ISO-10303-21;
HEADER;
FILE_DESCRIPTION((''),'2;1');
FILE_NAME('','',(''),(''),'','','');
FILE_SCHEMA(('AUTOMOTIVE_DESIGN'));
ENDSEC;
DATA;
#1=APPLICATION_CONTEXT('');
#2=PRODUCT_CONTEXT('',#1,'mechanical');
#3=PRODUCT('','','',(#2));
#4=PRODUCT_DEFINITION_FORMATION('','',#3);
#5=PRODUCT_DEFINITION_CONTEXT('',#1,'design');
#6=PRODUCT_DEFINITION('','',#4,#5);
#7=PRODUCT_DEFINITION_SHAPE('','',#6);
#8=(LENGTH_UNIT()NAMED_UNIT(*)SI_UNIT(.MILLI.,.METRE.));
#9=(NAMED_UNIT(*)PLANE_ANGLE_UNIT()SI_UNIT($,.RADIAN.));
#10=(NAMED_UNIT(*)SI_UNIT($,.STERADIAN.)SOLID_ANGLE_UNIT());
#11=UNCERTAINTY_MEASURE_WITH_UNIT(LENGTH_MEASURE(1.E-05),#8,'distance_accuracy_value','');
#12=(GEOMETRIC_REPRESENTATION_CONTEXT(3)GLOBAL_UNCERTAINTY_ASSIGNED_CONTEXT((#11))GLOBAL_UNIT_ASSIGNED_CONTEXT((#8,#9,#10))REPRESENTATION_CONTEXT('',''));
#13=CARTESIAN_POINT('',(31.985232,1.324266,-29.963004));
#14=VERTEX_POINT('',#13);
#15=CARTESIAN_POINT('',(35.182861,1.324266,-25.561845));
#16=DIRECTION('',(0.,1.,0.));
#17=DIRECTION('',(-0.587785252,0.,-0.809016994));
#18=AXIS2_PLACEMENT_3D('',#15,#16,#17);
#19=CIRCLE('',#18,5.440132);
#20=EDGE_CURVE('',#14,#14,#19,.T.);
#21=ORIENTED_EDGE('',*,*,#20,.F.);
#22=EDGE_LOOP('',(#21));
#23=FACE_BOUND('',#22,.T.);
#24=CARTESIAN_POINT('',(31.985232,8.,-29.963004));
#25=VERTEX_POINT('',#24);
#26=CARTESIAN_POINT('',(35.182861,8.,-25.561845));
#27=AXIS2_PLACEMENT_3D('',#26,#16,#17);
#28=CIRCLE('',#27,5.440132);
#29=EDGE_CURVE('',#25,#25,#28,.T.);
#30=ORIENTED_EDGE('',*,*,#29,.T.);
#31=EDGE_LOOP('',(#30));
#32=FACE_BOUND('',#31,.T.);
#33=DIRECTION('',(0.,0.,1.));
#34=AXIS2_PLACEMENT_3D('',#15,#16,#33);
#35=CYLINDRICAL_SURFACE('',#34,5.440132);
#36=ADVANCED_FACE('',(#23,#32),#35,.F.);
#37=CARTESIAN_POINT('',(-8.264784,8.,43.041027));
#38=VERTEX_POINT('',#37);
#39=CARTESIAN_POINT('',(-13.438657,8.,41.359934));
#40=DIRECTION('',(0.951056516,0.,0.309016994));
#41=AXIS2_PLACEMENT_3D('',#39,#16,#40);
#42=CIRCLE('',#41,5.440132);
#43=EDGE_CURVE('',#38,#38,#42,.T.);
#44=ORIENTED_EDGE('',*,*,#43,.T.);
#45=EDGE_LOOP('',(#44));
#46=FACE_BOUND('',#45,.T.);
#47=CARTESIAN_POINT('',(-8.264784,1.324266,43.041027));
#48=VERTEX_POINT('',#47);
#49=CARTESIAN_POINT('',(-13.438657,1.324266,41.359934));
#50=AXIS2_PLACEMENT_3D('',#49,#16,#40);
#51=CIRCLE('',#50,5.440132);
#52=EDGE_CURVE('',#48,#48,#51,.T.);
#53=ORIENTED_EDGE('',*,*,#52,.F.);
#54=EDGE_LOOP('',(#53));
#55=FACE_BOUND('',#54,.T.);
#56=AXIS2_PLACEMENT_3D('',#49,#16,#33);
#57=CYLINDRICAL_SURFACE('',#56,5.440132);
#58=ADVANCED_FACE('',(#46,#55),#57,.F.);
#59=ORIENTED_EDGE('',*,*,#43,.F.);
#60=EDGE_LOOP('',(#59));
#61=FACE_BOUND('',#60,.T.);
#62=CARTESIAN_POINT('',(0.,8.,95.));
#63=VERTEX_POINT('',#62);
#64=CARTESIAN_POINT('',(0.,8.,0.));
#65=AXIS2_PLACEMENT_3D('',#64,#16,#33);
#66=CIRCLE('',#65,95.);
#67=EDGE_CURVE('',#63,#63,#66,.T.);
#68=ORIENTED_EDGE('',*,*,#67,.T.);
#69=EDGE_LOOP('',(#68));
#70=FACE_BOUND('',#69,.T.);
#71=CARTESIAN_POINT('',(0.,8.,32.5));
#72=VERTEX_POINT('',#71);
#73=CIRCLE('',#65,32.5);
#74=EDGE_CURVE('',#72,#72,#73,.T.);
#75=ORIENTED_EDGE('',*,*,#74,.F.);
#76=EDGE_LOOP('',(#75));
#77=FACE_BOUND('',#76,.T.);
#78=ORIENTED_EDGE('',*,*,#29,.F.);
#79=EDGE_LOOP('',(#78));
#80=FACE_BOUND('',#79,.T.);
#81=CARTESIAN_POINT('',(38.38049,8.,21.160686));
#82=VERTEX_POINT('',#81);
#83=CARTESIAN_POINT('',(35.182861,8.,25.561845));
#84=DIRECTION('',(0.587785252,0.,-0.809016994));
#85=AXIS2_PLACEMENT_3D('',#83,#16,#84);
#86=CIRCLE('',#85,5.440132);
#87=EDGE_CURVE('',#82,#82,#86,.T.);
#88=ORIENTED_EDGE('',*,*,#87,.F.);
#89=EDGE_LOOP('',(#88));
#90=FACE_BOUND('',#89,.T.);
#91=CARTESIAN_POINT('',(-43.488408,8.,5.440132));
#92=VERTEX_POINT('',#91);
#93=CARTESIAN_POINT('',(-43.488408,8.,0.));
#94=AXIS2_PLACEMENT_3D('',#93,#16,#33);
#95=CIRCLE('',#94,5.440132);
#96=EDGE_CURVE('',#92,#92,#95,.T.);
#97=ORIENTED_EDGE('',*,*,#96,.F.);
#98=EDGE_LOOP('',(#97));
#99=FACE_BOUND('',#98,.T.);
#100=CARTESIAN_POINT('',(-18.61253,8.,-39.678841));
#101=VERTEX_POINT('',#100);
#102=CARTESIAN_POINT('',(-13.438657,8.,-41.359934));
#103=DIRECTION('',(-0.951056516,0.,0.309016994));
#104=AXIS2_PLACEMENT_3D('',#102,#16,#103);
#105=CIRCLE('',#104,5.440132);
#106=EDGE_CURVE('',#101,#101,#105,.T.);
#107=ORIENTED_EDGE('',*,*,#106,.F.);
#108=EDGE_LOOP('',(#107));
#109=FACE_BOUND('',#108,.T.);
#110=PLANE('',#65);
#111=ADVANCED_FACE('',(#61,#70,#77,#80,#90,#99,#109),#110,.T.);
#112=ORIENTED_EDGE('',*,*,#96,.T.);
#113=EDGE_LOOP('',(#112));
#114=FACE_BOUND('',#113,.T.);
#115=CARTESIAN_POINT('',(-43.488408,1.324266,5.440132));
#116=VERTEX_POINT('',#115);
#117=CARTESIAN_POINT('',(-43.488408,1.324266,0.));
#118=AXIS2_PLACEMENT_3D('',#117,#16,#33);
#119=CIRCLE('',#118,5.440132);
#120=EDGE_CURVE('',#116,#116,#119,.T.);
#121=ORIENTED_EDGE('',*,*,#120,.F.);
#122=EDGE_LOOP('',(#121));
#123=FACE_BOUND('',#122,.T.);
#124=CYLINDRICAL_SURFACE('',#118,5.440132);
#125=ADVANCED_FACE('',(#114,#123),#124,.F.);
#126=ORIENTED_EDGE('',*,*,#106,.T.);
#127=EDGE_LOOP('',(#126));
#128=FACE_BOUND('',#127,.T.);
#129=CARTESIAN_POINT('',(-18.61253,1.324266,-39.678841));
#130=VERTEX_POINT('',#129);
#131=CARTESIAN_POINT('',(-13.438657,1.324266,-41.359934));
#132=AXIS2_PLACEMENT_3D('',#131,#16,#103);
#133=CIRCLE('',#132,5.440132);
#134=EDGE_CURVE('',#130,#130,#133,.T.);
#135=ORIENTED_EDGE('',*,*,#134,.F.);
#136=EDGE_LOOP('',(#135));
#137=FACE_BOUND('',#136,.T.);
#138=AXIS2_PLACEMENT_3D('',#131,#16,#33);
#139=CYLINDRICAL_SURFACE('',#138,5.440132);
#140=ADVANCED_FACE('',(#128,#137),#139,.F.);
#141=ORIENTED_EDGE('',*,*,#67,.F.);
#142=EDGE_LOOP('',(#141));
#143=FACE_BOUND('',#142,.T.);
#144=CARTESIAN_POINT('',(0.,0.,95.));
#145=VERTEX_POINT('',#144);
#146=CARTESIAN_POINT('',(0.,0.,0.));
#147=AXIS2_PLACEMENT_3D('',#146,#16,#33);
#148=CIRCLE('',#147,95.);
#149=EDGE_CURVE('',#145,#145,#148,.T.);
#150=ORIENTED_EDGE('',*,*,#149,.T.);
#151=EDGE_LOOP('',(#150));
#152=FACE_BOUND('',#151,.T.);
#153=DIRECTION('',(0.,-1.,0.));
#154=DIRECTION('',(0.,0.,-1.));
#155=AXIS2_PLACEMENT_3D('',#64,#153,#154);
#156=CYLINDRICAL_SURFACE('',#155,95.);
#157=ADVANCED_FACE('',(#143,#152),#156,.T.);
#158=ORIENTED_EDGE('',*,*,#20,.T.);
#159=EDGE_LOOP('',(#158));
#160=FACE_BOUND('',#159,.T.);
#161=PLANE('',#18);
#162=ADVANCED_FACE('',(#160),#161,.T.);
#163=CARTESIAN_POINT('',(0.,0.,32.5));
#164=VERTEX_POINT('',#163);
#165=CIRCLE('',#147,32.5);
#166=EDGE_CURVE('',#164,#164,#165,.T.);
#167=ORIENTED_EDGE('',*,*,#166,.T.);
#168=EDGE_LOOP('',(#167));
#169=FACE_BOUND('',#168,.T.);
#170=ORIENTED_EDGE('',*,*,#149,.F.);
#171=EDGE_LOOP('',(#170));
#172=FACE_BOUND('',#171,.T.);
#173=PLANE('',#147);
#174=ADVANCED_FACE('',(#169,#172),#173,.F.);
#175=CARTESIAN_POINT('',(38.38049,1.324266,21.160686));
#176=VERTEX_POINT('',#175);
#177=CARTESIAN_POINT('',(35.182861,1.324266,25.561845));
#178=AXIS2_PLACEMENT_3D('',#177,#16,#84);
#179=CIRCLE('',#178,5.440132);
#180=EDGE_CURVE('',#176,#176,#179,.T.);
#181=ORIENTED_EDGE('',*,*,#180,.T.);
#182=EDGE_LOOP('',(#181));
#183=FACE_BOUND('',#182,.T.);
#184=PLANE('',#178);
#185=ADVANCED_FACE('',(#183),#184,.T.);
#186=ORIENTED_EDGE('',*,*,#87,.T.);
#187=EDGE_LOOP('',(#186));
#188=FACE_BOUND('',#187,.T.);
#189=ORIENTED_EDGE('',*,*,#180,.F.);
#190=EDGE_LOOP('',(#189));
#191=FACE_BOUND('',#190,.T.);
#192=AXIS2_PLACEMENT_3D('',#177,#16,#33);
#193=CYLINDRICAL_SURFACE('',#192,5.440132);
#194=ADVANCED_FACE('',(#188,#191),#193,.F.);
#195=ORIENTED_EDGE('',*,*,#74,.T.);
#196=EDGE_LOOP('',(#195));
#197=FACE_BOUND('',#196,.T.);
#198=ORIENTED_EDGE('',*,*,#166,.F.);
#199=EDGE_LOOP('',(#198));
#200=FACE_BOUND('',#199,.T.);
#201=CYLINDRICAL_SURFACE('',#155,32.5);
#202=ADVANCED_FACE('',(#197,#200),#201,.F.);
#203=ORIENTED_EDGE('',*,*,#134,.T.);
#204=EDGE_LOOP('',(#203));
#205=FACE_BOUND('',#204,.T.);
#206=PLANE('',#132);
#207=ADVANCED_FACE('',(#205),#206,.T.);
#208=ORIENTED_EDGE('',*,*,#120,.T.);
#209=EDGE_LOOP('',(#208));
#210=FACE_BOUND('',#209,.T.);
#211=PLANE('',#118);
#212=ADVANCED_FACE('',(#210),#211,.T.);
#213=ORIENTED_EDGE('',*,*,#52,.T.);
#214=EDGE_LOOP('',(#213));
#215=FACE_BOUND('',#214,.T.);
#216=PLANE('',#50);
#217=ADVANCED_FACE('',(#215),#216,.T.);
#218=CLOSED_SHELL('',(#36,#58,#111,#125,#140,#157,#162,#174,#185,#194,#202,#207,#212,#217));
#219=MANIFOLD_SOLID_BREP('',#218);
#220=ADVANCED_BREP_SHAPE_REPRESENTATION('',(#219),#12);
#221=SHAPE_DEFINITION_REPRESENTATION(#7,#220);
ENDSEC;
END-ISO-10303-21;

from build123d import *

# Parameters (mm, degrees)
SKETCH1_R           = 95
BOSS_EXTRUDE1_DEPTH = 8
SKETCH2_R           = 32.5
CUT_EXTRUDE1_DEPTH  = 135.588261004
SKETCH3_R           = 5.440131652
CUT_EXTRUDE2_DEPTH  = 6.675734076
CIRPATTERN1_COUNT   = 5


with BuildPart() as part:
    # Sketch1 → Boss-Extrude1 (new body)
    with BuildSketch(Plane(origin=(0, 0, 0), x_dir=(1, 0, 0), z_dir=(0, 1, 0))):
        Circle(SKETCH1_R)
    extrude(amount=BOSS_EXTRUDE1_DEPTH)

    # Sketch2 → Cut-Extrude1 (cut, through all)
    with BuildSketch(Plane(origin=(0, 0, 0), x_dir=(1, 0, 0), z_dir=(0, 1, 0))):
        Circle(SKETCH2_R)
    extrude(amount=CUT_EXTRUDE1_DEPTH, mode=Mode.SUBTRACT)

    # Sketch3 → Cut-Extrude2 (cut)
    with BuildSketch(Plane(origin=(0, 8, 0), x_dir=(1, 0, 0), z_dir=(0, 1, 0))):
        with Locations((-43.488407833, 0)):
            Circle(SKETCH3_R)
    cut_extrude2 = extrude(amount=-CUT_EXTRUDE2_DEPTH, mode=Mode.SUBTRACT)

    # CirPattern1: Cut-Extrude2 ×5 about axis
    cirpattern1_axis = Axis((0, 0, 0), (0, 1, 0))
    for i in range(1, CIRPATTERN1_COUNT):
        add(cut_extrude2.rotate(cirpattern1_axis, i * 360 / CIRPATTERN1_COUNT), mode=Mode.SUBTRACT)


solid = part.part
